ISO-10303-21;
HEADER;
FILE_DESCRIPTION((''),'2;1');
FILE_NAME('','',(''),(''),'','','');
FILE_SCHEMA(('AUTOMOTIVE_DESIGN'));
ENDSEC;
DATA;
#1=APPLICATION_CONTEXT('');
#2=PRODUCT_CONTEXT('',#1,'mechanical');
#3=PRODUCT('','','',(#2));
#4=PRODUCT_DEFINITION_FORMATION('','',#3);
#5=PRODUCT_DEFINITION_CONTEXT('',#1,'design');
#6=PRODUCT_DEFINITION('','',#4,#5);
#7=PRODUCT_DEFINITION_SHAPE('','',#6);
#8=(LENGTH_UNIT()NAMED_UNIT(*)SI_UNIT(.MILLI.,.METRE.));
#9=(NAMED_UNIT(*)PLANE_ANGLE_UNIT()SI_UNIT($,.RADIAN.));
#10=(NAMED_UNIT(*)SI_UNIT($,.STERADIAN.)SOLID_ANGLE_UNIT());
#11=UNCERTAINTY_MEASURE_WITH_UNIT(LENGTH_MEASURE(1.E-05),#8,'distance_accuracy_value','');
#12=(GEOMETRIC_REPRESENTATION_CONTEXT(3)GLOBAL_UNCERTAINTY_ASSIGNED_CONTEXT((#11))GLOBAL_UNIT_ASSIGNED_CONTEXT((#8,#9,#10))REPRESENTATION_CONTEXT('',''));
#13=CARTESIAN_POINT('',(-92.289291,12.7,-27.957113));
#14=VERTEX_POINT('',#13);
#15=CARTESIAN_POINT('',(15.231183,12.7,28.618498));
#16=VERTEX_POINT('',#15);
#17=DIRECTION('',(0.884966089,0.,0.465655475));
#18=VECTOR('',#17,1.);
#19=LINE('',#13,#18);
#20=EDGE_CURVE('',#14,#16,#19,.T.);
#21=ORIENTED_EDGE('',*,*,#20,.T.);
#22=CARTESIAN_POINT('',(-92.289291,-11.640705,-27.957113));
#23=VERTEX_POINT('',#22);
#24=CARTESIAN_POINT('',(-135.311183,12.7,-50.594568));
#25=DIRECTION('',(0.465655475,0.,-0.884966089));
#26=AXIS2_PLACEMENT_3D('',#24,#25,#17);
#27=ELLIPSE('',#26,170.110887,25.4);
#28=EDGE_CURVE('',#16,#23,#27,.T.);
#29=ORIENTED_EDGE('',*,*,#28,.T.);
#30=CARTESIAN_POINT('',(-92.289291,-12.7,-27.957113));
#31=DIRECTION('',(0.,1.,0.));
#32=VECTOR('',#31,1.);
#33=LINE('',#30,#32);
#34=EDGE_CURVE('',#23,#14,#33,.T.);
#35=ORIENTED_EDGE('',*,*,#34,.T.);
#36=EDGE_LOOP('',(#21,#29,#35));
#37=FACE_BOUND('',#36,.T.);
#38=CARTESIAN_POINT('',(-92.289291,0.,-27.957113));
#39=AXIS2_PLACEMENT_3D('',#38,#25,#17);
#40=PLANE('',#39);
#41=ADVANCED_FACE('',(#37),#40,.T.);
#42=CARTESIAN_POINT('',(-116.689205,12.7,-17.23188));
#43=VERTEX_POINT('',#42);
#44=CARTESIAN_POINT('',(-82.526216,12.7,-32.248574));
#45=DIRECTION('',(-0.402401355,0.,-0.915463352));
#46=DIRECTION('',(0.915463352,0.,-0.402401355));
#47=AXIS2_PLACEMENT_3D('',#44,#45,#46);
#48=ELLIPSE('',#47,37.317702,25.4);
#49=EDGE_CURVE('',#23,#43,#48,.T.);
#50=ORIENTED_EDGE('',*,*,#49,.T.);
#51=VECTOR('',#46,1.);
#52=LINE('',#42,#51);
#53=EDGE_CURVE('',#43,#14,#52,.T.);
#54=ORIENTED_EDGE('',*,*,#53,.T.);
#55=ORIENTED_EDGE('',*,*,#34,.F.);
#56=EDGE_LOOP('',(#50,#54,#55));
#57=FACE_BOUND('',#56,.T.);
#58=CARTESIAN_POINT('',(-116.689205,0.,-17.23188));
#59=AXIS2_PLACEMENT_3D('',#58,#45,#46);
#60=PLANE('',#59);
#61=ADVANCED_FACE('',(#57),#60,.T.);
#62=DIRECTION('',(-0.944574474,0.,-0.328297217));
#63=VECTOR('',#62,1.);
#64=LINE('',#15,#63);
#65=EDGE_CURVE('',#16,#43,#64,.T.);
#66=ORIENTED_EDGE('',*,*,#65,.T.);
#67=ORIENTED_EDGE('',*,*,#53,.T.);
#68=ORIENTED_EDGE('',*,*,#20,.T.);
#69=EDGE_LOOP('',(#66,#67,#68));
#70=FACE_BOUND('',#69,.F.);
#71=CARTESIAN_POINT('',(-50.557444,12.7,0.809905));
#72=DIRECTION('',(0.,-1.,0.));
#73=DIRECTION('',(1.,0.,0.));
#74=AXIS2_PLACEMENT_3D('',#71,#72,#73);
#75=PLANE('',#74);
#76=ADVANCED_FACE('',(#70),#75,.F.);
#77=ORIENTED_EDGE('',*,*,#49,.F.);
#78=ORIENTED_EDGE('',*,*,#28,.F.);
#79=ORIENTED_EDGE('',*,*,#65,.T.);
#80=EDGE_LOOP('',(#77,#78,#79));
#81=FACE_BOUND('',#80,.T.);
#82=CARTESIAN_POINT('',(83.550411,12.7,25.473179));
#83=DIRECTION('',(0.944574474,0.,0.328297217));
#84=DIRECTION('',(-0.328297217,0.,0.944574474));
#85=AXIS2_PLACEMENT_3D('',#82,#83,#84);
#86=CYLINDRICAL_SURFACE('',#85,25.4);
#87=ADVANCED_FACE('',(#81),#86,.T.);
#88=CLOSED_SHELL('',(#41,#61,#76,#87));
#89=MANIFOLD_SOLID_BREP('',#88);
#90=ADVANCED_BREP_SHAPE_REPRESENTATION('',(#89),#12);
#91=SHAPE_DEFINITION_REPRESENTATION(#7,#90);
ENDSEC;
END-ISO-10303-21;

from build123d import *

# Parameters (mm, degrees)
F1_DEPTH    = 12.7
F2_T1_DEPTH = 266.661182443


# Not quite as in the source:
# - a fillet or chamfer that OpenCascade refuses, or shapes differently, is made with other operations: its cross-section is extruded or revolved along the edge and cut away or added


with BuildPart() as f1:
    # F0 (on Front) → F1 (new body, symmetric)
    with BuildSketch(Plane.XZ):
        Polygon((15.2311827987, 28.618497774), (-116.6892051697, -17.2318797559), (-92.2892913222, -27.9571134597), align=None)
    extrude(amount=F1_DEPTH, both=True)

    # F2: fillet of radius 25.4 on 1 edges, made by hand

    # F2_s2 → F2_t1 (cut)
    with BuildSketch(Plane(origin=(82.4446889798, 0, 28.6545557762), x_dir=(0, 1, 0), z_dir=(-0.9445744742, 0, -0.3282972171))):
        with BuildLine():
            ThreePointArc((12.7, -22.0319475609), (-5.2605122421, -14.592459803), (-12.7, 3.3680524391))
            Line((-12.7, 3.3680524391), (-12.7, -22.0319475609))
            Line((-12.7, -22.0319475609), (12.7, -22.0319475609))
        make_face()
    extrude(amount=F2_T1_DEPTH, mode=Mode.SUBTRACT)


solid = f1.part
